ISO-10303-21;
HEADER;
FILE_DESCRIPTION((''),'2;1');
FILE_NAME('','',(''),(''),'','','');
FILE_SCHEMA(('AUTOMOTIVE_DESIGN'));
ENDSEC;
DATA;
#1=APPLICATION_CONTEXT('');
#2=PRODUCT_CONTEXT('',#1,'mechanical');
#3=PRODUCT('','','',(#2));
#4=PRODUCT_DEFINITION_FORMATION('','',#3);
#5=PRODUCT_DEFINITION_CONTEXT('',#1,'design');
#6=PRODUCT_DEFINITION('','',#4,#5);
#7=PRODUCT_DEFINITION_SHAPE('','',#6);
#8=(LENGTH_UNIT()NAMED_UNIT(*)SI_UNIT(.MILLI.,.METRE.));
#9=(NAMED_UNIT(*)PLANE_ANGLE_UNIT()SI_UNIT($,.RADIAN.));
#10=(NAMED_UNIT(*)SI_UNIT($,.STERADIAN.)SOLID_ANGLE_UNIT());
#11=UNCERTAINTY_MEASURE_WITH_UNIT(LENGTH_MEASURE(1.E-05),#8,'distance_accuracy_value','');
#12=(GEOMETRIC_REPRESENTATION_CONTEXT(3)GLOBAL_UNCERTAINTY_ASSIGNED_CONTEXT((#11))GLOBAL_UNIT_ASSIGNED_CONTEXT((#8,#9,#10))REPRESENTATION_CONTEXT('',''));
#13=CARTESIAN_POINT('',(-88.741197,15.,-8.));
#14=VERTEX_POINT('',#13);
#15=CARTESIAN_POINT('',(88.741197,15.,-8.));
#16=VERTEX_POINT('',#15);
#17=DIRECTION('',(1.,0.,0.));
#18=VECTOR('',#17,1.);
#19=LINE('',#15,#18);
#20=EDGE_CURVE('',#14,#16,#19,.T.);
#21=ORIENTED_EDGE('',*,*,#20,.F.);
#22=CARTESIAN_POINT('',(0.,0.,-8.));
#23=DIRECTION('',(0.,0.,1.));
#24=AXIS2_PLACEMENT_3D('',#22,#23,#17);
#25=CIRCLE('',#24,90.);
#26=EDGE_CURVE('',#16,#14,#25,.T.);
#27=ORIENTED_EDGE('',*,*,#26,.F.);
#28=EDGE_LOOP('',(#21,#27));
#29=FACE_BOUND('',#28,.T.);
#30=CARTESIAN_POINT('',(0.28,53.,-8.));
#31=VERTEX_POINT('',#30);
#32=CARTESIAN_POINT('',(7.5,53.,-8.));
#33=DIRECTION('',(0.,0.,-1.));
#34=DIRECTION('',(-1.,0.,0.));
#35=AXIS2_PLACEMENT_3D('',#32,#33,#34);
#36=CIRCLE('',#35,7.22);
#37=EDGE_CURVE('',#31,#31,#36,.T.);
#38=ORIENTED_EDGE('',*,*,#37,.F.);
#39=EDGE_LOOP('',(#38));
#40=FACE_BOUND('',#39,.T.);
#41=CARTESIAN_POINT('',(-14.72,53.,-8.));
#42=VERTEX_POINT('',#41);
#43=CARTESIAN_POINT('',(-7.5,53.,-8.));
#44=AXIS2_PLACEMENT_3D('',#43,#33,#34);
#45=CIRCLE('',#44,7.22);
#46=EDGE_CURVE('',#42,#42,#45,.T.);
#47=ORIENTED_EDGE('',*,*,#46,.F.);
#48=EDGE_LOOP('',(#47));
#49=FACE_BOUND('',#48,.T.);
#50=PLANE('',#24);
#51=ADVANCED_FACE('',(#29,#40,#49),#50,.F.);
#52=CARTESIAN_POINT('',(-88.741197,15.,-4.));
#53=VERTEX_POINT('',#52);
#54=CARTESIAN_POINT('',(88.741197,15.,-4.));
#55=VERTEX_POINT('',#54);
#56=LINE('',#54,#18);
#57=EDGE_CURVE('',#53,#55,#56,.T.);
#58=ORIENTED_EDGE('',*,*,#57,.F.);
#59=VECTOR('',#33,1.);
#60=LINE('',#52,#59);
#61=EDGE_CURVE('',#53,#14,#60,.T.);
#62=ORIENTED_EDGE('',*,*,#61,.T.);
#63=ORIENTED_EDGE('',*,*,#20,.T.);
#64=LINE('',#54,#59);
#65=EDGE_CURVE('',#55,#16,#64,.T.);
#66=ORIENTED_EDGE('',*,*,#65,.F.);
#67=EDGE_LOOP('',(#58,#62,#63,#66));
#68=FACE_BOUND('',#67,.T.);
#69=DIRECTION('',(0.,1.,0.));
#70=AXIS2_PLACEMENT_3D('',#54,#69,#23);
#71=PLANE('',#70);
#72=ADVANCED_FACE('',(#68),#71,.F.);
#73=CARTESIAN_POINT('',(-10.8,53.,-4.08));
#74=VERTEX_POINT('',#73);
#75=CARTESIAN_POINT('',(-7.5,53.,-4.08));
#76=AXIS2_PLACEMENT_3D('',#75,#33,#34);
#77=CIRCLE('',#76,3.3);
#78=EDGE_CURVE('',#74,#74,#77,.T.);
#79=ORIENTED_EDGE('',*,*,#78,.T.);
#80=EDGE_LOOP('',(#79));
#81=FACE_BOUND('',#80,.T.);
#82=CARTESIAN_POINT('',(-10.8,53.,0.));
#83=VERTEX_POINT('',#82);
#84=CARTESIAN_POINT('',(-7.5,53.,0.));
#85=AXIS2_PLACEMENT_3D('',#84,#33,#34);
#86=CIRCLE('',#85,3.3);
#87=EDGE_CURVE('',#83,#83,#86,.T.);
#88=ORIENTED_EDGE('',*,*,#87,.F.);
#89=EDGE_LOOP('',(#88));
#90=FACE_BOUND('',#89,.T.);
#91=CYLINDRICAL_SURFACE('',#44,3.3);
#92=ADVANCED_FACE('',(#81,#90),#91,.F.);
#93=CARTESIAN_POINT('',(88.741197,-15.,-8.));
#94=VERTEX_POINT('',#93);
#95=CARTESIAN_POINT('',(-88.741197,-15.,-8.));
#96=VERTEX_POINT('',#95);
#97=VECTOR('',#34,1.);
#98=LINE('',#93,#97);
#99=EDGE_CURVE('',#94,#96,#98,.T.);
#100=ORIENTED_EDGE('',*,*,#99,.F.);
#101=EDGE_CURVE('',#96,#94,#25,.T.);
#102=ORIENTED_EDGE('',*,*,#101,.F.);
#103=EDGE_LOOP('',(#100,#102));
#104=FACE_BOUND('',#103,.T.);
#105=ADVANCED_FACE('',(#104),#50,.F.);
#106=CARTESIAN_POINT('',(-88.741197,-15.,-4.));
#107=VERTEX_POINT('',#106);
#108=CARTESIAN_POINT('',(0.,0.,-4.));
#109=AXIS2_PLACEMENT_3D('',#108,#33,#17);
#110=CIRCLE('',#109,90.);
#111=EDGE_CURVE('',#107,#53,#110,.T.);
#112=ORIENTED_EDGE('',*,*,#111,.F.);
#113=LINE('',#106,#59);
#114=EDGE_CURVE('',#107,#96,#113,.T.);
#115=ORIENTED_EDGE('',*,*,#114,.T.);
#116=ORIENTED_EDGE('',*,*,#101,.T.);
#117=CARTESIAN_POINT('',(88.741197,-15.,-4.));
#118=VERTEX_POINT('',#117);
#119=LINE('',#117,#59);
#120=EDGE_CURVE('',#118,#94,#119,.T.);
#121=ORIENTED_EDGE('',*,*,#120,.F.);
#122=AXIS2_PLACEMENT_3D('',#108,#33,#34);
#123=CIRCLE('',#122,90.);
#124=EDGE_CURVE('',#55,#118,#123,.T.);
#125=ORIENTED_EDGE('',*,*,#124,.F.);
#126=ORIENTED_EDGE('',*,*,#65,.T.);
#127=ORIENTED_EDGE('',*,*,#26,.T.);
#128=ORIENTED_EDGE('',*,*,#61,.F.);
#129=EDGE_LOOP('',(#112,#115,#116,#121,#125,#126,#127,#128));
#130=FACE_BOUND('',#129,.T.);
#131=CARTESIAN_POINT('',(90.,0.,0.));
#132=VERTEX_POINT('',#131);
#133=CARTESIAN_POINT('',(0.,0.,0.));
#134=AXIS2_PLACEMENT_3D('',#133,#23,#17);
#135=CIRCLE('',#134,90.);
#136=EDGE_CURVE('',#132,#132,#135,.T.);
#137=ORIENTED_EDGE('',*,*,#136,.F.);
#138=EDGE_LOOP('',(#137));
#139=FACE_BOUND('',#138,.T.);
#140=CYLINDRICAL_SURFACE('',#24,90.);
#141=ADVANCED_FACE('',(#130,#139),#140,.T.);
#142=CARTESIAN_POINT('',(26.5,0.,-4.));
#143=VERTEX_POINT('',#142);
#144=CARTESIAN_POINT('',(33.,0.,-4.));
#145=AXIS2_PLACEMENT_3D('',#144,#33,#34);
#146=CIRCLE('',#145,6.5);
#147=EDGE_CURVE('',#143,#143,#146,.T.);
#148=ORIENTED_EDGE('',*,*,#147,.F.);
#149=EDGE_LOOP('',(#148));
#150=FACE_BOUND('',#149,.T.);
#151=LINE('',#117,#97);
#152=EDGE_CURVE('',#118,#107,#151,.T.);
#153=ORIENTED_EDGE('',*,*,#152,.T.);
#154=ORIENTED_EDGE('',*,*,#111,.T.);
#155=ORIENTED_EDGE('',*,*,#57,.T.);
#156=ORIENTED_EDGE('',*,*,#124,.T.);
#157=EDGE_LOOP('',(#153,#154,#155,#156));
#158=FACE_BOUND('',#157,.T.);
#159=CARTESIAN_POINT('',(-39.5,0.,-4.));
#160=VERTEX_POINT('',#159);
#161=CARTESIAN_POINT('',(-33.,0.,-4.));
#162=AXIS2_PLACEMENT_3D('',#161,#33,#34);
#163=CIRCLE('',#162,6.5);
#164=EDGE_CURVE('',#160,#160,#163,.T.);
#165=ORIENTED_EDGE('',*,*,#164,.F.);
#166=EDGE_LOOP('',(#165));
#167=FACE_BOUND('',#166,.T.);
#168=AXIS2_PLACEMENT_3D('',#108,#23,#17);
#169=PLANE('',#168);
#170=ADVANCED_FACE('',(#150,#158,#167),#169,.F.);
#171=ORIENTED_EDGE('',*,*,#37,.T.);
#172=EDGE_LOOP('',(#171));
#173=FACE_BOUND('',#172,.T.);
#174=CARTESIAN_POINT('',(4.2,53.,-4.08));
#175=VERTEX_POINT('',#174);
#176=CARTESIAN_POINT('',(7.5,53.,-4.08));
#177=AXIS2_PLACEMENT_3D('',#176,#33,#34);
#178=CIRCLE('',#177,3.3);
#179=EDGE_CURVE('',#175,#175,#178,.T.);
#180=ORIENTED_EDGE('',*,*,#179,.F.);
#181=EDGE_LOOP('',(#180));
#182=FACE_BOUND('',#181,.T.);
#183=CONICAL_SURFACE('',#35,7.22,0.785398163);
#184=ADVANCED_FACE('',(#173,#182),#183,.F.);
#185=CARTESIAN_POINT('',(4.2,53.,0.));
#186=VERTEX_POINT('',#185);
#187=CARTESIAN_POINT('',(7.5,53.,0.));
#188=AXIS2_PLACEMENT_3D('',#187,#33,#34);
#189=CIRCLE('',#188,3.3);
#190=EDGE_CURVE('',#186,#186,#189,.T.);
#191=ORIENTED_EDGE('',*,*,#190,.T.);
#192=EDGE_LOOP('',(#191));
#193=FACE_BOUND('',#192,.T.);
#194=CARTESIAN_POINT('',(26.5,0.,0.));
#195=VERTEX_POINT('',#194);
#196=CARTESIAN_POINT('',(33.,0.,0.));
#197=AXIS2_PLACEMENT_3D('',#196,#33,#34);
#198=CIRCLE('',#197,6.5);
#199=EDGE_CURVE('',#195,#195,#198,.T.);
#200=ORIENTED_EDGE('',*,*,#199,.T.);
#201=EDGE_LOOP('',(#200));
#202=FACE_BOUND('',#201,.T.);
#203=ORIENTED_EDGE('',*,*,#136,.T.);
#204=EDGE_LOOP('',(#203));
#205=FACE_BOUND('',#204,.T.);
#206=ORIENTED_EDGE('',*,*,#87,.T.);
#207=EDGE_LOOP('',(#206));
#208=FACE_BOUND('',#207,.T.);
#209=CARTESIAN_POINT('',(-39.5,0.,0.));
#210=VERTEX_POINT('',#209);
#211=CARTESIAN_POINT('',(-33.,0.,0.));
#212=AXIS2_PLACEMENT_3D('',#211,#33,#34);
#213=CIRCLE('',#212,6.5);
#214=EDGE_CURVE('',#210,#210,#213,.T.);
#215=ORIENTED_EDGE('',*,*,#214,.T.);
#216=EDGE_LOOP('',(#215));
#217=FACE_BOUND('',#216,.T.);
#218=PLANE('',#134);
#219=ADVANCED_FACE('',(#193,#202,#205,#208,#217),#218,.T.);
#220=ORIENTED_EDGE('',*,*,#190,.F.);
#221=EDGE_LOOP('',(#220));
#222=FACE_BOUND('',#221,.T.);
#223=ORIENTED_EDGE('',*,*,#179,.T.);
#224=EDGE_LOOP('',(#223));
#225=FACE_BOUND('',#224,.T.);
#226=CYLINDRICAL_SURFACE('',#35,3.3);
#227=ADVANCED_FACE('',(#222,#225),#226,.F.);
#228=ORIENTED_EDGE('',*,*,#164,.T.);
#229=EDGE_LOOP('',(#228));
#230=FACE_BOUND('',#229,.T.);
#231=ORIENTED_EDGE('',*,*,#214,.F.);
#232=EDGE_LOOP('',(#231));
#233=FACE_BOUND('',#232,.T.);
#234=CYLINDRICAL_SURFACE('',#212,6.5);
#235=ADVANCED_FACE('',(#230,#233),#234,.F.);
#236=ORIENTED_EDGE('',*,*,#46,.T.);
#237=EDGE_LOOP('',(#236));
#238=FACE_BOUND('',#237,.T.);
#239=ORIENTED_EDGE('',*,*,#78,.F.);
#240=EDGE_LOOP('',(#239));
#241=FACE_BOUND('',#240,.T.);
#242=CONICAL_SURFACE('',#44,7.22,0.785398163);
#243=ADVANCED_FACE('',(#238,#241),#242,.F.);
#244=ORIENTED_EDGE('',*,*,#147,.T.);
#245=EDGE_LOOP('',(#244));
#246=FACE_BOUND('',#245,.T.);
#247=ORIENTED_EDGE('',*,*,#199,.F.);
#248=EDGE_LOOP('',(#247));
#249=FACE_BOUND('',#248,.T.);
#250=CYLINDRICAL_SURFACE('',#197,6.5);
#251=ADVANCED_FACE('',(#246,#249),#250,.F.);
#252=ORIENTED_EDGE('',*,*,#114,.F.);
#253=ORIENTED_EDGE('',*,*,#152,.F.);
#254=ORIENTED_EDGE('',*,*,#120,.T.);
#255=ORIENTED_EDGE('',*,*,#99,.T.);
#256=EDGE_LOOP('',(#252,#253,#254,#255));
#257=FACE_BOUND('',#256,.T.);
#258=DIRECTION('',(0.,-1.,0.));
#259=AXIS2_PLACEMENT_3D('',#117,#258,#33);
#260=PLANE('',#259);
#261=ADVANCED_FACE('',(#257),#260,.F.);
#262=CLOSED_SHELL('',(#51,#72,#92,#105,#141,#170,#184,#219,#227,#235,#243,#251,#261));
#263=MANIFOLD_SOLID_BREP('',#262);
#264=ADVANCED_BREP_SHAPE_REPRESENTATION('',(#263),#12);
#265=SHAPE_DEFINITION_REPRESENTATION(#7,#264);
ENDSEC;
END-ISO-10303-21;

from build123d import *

# Parameters (mm, degrees)
ESBO_O1_R                                           = 90
FLANGE_BASE2_DEPTH                                  = 8
CORTE_EXTRUS_O3_START                               = -4
CORTE_EXTRUS_O3_DEPTH                               = 4
ESBO_O13_R                                          = 6.5
CORTE_EXTRUS_O4_DEPTH                               = 4
ESCAREADO_PARA_PARAFUSO_ALLEN_SEXTAVADO_D           = 6.6
ESCAREADO_PARA_PARAFUSO_ALLEN_SEXTAVADO_CSINK_D     = 14.44
ESCAREADO_PARA_PARAFUSO_ALLEN_SEXTAVADO_CSINK_ANGLE = 90


# Sheet-metal steps are written as plain solids
with BuildPart() as part:
    # Esboço1 → Flange-base2 (new body)
    with BuildSketch(Plane.XY):
        Circle(ESBO_O1_R)
    extrude(amount=-FLANGE_BASE2_DEPTH)

    # Esboço12 → Corte-extrusão3 (cut)
    with BuildSketch(Plane(origin=(0, 0, -8), x_dir=(-1, 0, 0), z_dir=(0, 0, -1)).offset(CORTE_EXTRUS_O3_START)):
        with BuildLine():
            Line((-88.741196746, 15), (88.741196746, 15))
            ThreePointArc((88.741196746, 15), (90, 0), (88.741196746, -15))
            Line((88.741196746, -15), (-88.741196746, -15))
            ThreePointArc((-88.741196746, -15), (-90, 0), (-88.741196746, 15))
        make_face()
    extrude(amount=CORTE_EXTRUS_O3_DEPTH, mode=Mode.SUBTRACT)

    # Esboço13 → Corte-extrusão4 (cut)
    with BuildSketch(Plane(origin=(0, 0, -4), x_dir=(-1, 0, 0), z_dir=(0, 0, -1))):
        with Locations((33, 0)):
            Circle(ESBO_O13_R)
        with Locations((-33, 0)):
            Circle(ESBO_O13_R)
    extrude(amount=-CORTE_EXTRUS_O4_DEPTH, mode=Mode.SUBTRACT)

    # Escareado para parafuso Allen sextavado escareado de M63 (through all)
    with Locations(Plane(origin=(0, 0, -8), x_dir=(-1, 0, 0), z_dir=(0, 0, -1))):
        with Locations((-7.5, 53), (7.5, 53)):
            CounterSinkHole(ESCAREADO_PARA_PARAFUSO_ALLEN_SEXTAVADO_D / 2, ESCAREADO_PARA_PARAFUSO_ALLEN_SEXTAVADO_CSINK_D / 2, counter_sink_angle=ESCAREADO_PARA_PARAFUSO_ALLEN_SEXTAVADO_CSINK_ANGLE)


solid = part.part
